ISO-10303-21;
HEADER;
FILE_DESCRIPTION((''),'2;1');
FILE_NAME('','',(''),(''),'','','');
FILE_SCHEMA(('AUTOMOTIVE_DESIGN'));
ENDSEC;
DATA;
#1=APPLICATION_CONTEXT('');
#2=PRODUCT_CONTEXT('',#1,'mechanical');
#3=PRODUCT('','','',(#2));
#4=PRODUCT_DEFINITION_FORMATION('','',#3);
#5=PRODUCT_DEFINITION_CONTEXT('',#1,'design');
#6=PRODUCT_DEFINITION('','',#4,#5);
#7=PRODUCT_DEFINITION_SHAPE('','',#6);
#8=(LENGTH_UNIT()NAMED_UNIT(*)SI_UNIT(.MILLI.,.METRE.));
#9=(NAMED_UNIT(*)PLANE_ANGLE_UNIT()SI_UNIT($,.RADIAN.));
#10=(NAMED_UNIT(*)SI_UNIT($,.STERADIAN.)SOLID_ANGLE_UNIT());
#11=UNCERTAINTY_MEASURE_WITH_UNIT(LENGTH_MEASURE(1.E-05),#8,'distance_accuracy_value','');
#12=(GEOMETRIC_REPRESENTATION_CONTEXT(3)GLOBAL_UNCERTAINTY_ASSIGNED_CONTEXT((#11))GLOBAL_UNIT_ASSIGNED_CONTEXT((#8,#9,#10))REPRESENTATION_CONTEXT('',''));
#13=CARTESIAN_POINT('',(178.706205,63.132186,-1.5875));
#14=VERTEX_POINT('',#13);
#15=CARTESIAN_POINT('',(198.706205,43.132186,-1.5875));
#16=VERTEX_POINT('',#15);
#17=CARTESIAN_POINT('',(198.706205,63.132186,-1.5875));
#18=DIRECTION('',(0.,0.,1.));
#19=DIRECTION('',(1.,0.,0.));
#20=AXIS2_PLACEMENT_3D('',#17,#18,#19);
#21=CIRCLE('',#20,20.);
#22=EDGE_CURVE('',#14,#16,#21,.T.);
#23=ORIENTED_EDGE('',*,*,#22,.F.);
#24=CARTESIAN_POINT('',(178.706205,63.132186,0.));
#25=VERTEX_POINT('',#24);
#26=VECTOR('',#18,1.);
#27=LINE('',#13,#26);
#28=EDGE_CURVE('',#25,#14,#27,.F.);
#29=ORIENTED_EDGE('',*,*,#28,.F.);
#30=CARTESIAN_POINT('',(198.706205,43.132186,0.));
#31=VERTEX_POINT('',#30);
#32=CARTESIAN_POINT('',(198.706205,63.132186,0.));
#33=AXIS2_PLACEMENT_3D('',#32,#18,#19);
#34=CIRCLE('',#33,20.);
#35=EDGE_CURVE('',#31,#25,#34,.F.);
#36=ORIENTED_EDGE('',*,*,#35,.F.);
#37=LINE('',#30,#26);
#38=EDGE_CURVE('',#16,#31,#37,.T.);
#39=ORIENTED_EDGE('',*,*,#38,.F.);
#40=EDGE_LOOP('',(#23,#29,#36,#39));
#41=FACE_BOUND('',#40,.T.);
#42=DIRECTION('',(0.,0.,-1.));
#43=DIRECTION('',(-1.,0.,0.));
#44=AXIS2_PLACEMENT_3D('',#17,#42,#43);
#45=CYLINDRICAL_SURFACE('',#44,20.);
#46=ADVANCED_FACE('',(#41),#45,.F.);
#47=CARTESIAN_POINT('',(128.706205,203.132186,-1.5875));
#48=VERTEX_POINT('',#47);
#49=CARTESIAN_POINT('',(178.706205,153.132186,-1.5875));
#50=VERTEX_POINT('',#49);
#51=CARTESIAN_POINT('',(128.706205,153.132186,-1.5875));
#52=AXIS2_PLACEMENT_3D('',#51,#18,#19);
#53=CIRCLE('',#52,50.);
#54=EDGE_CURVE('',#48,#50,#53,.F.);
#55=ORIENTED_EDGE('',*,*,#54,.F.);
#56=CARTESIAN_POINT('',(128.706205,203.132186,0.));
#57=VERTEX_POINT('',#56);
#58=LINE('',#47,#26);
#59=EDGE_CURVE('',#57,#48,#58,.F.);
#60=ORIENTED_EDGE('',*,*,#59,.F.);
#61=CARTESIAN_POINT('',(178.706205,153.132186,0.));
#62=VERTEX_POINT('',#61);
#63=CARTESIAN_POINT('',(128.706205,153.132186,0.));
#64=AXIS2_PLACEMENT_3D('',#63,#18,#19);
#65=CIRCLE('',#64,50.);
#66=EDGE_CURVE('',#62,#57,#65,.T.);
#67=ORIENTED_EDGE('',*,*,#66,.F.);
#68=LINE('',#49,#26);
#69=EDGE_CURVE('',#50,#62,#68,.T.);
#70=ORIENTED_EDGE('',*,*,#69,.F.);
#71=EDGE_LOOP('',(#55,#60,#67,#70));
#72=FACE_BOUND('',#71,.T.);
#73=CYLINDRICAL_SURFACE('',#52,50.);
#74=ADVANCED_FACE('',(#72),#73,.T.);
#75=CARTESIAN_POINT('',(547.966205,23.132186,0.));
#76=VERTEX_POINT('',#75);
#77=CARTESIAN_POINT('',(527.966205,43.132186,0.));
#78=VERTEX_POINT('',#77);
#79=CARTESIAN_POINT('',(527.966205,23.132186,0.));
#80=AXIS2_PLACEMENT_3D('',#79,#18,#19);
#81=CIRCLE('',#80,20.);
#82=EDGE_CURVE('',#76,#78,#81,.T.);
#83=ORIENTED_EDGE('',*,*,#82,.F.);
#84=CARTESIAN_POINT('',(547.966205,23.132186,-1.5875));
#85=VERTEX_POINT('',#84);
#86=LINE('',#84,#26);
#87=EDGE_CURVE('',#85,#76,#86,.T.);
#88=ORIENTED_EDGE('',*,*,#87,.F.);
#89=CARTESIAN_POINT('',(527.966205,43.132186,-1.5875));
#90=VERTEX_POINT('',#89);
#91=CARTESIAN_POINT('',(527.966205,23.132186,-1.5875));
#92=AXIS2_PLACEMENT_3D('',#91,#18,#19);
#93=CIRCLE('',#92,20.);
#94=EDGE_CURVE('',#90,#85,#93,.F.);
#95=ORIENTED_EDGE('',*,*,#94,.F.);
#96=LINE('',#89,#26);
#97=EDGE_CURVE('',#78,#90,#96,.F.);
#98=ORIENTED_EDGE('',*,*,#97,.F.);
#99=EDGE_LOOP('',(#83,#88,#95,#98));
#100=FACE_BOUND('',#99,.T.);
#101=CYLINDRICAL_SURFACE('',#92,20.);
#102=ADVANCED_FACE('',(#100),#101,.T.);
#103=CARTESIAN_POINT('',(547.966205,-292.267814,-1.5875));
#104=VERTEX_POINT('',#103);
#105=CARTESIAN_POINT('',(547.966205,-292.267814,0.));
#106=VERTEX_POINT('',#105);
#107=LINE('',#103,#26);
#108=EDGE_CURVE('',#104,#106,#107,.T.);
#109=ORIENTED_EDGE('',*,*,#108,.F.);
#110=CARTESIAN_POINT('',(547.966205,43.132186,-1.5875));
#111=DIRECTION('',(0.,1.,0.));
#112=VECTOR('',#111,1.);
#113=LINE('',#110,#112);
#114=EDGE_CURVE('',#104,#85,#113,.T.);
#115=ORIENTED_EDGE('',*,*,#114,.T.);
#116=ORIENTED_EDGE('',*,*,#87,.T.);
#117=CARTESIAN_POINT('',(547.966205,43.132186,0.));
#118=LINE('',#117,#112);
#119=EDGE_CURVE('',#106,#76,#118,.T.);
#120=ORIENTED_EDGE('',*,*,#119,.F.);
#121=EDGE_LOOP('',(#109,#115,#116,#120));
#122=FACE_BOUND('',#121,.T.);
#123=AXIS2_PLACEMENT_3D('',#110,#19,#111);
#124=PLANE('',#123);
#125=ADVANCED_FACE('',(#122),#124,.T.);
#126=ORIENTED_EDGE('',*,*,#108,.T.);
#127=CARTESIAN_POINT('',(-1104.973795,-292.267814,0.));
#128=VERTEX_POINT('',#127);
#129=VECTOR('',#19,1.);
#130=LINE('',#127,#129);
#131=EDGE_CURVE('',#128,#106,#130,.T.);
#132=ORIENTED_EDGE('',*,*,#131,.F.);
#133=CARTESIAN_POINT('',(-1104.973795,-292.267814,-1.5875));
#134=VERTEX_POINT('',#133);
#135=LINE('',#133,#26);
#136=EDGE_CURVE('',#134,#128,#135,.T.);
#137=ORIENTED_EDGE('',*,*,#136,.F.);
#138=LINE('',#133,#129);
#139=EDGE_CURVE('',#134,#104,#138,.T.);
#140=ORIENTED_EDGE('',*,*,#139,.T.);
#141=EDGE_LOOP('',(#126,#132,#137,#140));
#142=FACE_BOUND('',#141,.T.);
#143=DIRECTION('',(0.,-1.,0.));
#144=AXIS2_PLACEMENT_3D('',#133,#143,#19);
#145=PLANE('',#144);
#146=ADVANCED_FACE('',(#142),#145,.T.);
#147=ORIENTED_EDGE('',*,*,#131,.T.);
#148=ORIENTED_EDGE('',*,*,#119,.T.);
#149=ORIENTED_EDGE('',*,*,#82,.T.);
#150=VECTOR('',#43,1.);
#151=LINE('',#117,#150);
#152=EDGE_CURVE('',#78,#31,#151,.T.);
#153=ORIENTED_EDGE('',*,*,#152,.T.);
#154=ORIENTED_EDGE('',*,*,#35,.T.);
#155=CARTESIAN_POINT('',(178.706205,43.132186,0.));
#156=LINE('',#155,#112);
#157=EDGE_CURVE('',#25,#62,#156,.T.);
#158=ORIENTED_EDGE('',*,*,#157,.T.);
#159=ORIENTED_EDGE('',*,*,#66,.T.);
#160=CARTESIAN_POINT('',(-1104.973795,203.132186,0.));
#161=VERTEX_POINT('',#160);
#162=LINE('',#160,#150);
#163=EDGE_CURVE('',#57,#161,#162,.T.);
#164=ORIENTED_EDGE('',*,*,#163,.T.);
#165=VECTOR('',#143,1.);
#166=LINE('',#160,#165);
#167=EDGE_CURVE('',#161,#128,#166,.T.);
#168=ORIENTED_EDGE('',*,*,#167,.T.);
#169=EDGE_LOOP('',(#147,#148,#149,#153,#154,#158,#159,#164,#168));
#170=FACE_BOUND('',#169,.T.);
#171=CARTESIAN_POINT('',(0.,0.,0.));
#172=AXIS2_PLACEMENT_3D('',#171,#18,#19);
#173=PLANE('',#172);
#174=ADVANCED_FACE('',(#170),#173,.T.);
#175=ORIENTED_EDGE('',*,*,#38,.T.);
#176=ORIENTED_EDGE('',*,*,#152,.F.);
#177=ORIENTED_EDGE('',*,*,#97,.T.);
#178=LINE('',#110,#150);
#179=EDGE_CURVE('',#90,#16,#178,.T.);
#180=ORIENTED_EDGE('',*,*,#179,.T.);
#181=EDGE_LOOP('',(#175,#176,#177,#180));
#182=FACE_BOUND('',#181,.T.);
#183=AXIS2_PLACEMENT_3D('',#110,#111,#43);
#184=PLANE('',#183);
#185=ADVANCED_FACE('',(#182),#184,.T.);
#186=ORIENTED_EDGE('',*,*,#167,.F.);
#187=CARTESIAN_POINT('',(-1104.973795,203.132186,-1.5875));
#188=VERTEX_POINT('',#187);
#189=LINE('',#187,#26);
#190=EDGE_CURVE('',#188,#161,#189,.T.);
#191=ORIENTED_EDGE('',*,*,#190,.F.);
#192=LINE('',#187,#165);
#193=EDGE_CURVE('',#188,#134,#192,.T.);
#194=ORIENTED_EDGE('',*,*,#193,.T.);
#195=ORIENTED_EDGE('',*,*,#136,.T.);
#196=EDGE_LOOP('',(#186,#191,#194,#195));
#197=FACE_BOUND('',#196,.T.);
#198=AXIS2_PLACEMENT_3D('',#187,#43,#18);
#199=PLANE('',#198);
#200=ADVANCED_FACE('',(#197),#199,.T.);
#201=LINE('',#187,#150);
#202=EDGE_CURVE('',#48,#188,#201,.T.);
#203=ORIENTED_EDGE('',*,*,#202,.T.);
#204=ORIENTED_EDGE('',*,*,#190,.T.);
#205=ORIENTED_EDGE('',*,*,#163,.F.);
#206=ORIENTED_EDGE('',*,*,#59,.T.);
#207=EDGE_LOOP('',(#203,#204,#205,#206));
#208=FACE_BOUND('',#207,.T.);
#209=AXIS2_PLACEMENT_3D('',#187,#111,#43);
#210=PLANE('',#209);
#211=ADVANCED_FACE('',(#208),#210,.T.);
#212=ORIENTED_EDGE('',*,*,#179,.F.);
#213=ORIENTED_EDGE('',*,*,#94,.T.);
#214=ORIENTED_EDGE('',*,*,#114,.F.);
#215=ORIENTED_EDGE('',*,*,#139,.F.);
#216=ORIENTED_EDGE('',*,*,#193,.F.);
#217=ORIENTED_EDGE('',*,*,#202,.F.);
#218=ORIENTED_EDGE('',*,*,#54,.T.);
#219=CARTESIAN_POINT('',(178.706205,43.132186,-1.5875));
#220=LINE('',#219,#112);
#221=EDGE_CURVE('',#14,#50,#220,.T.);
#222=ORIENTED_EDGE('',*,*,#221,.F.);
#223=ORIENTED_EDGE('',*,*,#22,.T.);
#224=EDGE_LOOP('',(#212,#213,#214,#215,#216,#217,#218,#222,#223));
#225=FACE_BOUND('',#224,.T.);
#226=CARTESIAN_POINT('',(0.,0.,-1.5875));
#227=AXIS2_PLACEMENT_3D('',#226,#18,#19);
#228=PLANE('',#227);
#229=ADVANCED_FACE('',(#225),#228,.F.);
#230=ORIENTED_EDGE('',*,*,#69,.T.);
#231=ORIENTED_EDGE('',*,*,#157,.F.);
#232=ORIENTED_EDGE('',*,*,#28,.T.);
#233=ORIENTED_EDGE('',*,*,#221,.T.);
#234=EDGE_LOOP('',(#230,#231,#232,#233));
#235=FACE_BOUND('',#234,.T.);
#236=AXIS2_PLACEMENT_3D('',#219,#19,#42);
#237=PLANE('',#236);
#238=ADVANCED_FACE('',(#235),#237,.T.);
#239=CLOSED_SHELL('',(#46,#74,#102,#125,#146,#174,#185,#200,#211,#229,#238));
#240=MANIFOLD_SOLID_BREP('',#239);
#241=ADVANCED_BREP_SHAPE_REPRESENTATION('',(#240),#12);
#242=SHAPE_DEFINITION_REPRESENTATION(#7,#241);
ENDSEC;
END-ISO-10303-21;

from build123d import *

# Parameters (mm, degrees)
BRIDA_BASE1_DEPTH = 1.5875
REDONDEO2_R       = 20
REDONDEO3_R       = 50
REDONDEO4_R       = 20


# Sheet-metal steps are written as plain solids
with BuildPart() as part:
    # Croquis1 → Brida base1 (new body)
    with BuildSketch(Plane.XY):
        Polygon((-1104.973795497, 203.132185629), (178.706204503, 203.132185629), (178.706204503, 43.132185629), (547.966204503, 43.132185629), (547.966204503, -292.267814371), (-1104.973795497, -292.267814371), align=None)
    extrude(amount=-BRIDA_BASE1_DEPTH)

    # Redondeo2
    redondeo2_edges = [part.edges().sort_by_distance(p)[0] for p in [
        (178.706204503, 43.132185629, -0.79375),
    ]]
    fillet(redondeo2_edges, radius=REDONDEO2_R)

    # Redondeo3
    redondeo3_edges = [part.edges().sort_by_distance(p)[0] for p in [
        (178.706204503, 203.132185629, -0.79375),
    ]]
    fillet(redondeo3_edges, radius=REDONDEO3_R)

    # Redondeo4
    redondeo4_edges = [part.edges().sort_by_distance(p)[0] for p in [
        (547.966204503, 43.132185629, -0.79375),
    ]]
    fillet(redondeo4_edges, radius=REDONDEO4_R)


solid = part.part
